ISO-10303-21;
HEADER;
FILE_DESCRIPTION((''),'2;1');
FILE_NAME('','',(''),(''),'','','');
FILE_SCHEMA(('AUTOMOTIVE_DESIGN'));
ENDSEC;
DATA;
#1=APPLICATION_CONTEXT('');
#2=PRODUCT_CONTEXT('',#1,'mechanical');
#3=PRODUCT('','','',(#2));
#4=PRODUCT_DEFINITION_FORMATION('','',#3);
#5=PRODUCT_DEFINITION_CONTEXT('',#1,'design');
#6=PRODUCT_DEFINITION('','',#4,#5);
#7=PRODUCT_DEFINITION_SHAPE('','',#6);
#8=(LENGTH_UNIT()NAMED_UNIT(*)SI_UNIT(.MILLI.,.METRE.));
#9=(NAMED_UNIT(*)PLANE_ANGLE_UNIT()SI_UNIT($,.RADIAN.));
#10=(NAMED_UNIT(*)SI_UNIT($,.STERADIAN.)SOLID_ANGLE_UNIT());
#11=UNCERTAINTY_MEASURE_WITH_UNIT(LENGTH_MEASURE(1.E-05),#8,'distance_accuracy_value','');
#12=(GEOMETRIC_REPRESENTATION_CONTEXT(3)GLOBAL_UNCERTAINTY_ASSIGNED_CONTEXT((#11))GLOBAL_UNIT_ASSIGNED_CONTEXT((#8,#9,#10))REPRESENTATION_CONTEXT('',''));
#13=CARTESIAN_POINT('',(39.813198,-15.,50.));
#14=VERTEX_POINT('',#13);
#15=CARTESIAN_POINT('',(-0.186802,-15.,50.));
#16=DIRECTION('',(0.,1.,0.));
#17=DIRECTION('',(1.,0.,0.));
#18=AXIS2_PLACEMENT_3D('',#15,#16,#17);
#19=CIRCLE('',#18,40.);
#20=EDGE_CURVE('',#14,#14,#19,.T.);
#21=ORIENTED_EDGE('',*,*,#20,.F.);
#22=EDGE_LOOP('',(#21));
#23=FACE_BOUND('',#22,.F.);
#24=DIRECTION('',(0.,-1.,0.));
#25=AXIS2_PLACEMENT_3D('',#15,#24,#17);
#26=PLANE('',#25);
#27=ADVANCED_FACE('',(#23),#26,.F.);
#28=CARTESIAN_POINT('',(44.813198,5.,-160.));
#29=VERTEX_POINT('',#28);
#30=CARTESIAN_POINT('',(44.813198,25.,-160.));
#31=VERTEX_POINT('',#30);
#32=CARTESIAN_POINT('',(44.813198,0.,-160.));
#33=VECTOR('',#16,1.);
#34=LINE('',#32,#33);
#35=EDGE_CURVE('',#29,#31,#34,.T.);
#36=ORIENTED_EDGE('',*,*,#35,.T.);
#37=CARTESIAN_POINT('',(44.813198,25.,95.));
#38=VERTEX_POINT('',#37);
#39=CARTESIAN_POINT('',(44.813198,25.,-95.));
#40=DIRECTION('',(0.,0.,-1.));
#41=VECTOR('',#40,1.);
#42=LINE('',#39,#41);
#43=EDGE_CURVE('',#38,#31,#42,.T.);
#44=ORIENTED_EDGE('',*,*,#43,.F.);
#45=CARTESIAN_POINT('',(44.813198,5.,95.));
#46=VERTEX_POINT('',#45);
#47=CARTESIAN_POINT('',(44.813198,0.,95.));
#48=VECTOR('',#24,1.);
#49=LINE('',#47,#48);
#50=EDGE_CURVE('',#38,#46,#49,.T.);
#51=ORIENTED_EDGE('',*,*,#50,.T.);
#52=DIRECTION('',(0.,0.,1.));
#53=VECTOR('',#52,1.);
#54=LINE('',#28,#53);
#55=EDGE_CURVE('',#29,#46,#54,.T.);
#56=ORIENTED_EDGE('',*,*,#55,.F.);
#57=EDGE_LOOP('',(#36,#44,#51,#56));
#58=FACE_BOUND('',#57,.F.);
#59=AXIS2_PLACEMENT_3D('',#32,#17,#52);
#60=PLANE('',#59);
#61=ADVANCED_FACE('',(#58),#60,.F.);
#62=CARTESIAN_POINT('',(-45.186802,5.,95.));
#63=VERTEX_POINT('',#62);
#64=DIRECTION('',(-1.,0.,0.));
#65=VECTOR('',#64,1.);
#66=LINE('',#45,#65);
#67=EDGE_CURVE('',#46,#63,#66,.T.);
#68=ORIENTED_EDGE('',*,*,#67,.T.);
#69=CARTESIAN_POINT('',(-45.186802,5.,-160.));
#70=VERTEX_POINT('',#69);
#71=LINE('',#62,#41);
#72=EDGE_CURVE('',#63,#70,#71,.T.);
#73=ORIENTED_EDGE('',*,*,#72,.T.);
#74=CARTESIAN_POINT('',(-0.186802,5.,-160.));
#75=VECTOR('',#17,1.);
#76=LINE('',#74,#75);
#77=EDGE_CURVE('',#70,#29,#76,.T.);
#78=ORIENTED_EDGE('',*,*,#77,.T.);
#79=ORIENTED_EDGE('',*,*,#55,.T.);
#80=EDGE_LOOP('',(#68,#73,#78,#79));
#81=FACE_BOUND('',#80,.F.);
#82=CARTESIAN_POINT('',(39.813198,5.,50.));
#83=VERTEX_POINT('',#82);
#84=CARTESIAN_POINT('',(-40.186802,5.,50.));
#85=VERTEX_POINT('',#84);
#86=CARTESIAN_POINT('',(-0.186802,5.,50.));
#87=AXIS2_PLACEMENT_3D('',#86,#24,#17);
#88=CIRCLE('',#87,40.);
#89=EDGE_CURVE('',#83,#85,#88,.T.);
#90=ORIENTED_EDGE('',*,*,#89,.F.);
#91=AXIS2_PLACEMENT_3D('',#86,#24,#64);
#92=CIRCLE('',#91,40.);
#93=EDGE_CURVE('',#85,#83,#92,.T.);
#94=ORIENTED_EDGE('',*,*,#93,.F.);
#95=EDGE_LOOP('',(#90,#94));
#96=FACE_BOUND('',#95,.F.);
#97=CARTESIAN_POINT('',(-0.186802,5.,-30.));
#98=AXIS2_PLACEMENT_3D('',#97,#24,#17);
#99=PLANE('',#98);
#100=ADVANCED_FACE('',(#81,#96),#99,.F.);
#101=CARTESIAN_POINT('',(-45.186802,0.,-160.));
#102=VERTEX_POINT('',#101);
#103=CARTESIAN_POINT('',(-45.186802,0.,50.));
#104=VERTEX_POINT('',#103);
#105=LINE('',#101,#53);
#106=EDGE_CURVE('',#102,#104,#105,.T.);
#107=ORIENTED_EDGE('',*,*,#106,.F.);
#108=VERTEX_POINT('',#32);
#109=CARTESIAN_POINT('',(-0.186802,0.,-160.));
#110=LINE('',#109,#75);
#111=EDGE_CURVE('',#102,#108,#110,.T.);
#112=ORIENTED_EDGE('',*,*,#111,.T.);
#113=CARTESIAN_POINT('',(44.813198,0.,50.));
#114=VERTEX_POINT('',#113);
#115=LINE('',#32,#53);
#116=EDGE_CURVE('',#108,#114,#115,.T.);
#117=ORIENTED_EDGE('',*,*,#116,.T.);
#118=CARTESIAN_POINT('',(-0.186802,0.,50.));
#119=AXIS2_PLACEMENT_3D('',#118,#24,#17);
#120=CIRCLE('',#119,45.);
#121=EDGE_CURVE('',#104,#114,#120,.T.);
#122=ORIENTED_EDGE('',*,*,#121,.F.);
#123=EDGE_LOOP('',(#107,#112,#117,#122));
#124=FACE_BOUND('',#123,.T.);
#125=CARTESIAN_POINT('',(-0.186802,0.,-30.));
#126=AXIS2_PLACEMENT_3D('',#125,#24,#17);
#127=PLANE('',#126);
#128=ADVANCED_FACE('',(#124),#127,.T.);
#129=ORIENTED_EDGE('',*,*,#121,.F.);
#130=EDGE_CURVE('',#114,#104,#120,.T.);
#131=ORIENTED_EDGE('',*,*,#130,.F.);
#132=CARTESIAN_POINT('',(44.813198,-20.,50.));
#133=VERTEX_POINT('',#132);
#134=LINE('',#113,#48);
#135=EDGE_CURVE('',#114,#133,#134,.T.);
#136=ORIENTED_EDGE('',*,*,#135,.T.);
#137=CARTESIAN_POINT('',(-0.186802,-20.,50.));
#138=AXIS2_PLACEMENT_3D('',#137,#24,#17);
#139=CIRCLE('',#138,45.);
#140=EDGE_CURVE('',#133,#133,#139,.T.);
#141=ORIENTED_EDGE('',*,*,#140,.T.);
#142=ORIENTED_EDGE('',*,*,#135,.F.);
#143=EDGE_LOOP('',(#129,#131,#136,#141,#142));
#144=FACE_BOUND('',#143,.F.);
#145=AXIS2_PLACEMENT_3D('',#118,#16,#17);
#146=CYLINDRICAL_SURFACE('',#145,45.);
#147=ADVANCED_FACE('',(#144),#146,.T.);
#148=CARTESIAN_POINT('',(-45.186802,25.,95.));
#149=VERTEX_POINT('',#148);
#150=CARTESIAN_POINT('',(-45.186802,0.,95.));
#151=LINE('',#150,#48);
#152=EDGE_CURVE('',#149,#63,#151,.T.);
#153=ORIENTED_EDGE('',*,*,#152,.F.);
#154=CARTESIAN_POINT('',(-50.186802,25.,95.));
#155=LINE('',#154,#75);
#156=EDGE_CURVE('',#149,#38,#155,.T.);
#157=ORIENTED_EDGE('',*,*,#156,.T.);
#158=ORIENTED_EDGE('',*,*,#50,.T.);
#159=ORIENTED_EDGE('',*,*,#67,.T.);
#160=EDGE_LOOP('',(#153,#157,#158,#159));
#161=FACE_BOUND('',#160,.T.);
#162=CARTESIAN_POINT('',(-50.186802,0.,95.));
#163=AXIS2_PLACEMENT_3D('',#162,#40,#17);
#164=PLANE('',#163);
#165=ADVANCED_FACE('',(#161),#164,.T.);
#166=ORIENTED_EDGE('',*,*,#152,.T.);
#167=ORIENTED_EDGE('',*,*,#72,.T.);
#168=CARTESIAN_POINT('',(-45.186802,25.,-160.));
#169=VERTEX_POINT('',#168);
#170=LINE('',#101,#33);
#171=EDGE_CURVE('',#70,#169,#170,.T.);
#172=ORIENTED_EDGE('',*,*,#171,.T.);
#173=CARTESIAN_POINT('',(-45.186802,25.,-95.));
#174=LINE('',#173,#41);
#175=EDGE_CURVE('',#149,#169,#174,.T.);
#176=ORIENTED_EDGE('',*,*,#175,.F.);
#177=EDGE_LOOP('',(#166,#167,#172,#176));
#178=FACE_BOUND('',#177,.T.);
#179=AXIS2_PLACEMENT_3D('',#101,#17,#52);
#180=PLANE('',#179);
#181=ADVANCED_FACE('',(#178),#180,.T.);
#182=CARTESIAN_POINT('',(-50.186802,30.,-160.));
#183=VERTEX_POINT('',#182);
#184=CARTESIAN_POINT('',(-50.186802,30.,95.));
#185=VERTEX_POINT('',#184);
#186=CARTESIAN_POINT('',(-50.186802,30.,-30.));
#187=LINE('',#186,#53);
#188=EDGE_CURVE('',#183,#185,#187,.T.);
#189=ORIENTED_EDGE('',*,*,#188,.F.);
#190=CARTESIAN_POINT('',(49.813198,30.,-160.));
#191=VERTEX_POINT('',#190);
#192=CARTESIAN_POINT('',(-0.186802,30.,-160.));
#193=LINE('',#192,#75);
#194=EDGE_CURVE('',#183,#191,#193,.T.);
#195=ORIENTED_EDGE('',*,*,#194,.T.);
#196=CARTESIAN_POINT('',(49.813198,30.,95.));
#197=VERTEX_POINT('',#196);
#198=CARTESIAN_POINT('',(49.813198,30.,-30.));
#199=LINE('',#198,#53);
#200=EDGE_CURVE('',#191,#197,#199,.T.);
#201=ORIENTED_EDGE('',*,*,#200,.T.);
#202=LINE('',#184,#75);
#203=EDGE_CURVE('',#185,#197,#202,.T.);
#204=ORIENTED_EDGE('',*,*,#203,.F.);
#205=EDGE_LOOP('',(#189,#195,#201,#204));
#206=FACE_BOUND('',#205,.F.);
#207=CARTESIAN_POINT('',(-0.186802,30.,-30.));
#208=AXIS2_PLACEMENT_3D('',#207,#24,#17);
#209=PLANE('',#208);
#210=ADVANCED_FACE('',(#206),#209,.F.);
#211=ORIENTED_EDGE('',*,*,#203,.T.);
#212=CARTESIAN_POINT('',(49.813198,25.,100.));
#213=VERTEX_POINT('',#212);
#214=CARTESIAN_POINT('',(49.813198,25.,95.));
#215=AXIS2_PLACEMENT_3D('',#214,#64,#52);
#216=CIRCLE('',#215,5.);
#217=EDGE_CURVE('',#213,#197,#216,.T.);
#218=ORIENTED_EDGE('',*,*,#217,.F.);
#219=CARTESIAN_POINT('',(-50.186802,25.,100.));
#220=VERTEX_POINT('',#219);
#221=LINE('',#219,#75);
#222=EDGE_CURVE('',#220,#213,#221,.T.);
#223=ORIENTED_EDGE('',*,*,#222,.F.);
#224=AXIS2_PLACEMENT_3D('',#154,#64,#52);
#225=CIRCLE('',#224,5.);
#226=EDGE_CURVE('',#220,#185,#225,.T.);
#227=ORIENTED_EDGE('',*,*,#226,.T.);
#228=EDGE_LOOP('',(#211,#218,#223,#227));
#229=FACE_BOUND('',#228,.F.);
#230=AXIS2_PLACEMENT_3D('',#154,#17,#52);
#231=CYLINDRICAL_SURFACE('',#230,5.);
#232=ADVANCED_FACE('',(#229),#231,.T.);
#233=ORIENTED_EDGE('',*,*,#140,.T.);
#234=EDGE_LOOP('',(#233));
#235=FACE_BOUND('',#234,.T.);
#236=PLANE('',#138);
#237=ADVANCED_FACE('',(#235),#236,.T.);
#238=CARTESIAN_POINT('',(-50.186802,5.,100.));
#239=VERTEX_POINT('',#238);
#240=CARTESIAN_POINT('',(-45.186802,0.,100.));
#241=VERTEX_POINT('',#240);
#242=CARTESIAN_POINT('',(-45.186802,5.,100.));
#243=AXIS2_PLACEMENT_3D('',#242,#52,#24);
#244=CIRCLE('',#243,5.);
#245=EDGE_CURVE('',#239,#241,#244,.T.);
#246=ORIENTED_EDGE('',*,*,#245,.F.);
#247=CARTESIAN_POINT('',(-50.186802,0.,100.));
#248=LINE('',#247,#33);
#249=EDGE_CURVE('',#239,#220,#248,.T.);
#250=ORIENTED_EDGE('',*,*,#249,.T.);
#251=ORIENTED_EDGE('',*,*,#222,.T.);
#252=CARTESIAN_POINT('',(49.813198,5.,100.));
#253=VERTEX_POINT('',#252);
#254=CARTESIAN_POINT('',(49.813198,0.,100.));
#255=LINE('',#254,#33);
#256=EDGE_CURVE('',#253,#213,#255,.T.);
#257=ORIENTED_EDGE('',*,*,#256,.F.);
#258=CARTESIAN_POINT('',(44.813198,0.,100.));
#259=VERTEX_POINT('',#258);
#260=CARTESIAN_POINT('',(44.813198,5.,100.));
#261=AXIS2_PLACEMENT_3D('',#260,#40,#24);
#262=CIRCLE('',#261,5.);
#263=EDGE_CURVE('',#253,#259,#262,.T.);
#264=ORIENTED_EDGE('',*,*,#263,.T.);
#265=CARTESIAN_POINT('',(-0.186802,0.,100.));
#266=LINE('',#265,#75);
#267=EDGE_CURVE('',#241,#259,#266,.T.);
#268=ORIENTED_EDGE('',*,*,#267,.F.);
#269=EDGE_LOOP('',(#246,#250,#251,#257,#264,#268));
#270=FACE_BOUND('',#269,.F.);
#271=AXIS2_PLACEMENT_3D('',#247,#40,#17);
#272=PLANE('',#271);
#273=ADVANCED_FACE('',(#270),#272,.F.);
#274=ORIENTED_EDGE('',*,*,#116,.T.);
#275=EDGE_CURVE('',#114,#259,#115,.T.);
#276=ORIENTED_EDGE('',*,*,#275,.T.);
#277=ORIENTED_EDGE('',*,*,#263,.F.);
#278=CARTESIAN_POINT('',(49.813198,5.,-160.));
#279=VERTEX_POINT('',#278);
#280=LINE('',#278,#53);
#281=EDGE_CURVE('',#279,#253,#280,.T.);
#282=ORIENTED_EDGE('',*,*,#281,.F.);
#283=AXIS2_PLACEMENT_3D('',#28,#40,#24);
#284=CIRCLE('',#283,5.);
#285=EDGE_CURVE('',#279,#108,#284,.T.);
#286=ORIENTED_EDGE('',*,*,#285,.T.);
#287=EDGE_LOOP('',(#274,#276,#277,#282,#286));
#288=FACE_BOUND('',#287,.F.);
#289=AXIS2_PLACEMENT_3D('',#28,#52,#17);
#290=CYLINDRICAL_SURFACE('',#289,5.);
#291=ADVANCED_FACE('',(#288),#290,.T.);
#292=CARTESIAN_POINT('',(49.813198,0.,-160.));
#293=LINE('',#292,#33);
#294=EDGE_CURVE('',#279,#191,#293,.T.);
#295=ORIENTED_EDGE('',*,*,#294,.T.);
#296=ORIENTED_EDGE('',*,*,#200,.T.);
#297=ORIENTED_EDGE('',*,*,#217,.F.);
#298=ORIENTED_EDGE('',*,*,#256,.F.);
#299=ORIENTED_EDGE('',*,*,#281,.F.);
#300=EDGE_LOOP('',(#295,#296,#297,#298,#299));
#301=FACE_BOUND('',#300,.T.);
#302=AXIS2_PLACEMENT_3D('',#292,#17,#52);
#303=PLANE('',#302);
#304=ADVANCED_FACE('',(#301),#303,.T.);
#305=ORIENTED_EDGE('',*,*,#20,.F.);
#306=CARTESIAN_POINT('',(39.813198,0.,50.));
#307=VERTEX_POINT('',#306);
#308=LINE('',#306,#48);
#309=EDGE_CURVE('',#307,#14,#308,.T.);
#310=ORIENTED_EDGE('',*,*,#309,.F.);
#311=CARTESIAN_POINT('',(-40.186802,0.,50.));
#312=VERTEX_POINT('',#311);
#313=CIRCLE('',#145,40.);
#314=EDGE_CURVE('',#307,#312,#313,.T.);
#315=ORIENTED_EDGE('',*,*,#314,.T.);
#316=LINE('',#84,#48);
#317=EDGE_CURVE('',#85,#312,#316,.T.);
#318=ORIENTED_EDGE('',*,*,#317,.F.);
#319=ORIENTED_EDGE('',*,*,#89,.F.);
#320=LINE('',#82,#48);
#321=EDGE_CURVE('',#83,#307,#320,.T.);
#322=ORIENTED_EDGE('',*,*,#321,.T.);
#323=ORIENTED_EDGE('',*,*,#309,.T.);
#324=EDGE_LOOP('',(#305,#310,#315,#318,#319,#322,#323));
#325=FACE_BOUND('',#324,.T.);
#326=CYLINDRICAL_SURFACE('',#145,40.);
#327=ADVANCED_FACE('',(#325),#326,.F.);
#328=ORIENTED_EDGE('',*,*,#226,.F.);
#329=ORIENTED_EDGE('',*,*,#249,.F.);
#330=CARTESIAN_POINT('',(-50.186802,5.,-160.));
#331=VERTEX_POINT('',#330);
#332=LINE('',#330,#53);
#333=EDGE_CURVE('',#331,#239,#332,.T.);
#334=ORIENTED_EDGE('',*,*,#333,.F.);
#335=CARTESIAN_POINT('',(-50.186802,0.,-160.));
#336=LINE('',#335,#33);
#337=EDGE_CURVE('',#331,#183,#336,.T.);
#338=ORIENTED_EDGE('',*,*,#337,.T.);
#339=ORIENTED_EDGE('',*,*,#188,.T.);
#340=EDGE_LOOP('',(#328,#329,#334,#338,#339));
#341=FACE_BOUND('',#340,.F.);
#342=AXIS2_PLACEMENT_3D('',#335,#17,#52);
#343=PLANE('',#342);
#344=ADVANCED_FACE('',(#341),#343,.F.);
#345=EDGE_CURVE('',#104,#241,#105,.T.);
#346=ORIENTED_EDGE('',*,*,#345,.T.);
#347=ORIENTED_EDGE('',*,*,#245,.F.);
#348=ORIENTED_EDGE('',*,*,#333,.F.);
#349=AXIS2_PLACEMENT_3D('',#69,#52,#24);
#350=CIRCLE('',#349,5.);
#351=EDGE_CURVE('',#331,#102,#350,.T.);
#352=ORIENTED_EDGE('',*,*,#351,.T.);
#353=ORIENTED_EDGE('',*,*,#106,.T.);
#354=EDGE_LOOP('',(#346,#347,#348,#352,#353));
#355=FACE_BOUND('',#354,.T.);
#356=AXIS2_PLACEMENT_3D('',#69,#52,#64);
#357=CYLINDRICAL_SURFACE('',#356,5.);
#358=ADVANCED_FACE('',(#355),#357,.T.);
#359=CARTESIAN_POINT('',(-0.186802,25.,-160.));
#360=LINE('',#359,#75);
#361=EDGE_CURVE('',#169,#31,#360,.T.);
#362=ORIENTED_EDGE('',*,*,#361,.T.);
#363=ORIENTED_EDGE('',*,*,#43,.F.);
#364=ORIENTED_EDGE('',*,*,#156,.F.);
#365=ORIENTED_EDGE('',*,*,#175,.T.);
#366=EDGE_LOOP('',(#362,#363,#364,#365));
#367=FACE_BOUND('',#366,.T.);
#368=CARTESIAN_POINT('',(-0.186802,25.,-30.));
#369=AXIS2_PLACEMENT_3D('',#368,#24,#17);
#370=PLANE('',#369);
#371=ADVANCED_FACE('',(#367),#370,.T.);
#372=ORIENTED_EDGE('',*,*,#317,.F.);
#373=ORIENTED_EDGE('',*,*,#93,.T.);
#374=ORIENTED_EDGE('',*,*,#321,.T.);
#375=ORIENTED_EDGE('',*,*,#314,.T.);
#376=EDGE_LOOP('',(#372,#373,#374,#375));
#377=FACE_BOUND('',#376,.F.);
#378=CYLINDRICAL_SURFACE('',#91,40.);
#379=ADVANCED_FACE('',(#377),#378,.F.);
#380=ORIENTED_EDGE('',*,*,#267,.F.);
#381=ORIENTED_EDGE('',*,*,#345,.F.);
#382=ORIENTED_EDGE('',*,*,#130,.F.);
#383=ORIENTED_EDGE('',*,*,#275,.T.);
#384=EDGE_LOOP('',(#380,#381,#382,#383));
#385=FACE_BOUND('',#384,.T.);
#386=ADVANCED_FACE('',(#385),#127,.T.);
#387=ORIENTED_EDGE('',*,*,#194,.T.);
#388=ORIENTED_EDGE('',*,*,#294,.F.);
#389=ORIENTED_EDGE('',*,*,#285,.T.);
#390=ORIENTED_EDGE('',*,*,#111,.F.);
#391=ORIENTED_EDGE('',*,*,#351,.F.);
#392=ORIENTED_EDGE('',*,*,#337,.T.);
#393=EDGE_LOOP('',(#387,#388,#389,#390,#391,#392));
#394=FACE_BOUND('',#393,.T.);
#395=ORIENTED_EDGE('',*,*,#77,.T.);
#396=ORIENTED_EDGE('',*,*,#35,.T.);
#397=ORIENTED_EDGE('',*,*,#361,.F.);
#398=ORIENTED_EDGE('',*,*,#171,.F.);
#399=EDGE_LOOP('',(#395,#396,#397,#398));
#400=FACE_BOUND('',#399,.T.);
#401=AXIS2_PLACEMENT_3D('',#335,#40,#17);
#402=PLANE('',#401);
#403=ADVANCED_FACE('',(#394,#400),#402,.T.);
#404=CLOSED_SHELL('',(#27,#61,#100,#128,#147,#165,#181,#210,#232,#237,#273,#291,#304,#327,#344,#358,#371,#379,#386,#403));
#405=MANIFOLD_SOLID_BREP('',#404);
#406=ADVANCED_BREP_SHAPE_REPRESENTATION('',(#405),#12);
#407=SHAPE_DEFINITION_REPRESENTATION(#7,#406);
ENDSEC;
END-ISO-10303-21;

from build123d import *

# Parameters (mm, degrees)
F0_W        = 100
F0_H        = 260
F1_DEPTH    = 30
F3_R        = 5
F2_R        = 45
F4_DEPTH    = 20
F5_T        = 5
F5_T4_ANGLE = 180.000000001
F5_T6_ANGLE = 180.000000001


# Not quite as in the source:
# - a shell that OpenCascade refuses in one call is made with other operations: the cavity is built on its own and cut out


with BuildPart() as f1:
    # F0 (on Front) → F1 (new body)
    with BuildSketch(Plane.XZ):
        with Locations((-0.186801888, -30)):
            Rectangle(F0_W, F0_H)
    extrude(amount=-F1_DEPTH)

    # F3
    f3_edges = [f1.edges().sort_by_distance(p)[0] for p in [
        (49.813198, 0, -30),
        (-50.186802, 0, -30),
        (-0.186802, 30, 100),
    ]]
    fillet(f3_edges, radius=F3_R)

    # F2 (on Front) → F4 (join)
    with BuildSketch(Plane.XZ):
        with Locations((-0.186801888, 50)):
            Circle(F2_R)
    extrude(amount=F4_DEPTH)

    # F5: shell of thickness 5, made by hand


with BuildPart() as f5_core1:
    # F5_t2: copy of F1
    add(f1.part)

    # the walls: a layer under each face that stays
    f5_faces = [f5_core1.faces().sort_by_distance(p)[0] for p in [
        (-0.186801888, 12.5, 100),
        (49.813198112, 17.5, -30),
        (-30.186801888, 0, 91.6666666667),
        (-50.186801888, 17.5, -30),
        (-0.186801888, 30, -32.5),
        (-0.186801888, 0, -55),
        (-45.186801888, -10, 50),
        (-0.186801888, -20, 50),
    ]]
    thicken(f5_faces, amount=-F5_T, mode=Mode.SUBTRACT)

    # F5_s3 → F5_t4 (revolve, cut)
    with BuildSketch(Plane.XY.offset(50)):
        Polygon((44.863198112, -0.05), (44.813198112, 5), (39.813198112, 5), (39.813198112, 0), align=None)
    revolve(axis=Axis((-0.186801888, 0, 50), (0, -1, 0)), revolution_arc=F5_T4_ANGLE, mode=Mode.SUBTRACT)

    # F5_s5 → F5_t6 (revolve, cut)
    with BuildSketch(Plane.XY.offset(50)):
        Polygon((-45.236801888, -0.05), (-45.186801888, 5), (-40.186801888, 5), (-40.186801888, 0), align=None)
    revolve(axis=Axis((-0.186801888, 0, 50), (0, -1, 0)), revolution_arc=F5_T6_ANGLE, mode=Mode.SUBTRACT)


with BuildPart() as f1_1:
    add(f1.part)

    # what is left inside the walls is the cavity
    f5_cavity = [f5_core1.part.solids().sort_by_distance(p)[0] for p in [
        (-0.186802, 24.95, -75),
    ]]
    add(f5_cavity, mode=Mode.SUBTRACT)


solid = f1_1.part
